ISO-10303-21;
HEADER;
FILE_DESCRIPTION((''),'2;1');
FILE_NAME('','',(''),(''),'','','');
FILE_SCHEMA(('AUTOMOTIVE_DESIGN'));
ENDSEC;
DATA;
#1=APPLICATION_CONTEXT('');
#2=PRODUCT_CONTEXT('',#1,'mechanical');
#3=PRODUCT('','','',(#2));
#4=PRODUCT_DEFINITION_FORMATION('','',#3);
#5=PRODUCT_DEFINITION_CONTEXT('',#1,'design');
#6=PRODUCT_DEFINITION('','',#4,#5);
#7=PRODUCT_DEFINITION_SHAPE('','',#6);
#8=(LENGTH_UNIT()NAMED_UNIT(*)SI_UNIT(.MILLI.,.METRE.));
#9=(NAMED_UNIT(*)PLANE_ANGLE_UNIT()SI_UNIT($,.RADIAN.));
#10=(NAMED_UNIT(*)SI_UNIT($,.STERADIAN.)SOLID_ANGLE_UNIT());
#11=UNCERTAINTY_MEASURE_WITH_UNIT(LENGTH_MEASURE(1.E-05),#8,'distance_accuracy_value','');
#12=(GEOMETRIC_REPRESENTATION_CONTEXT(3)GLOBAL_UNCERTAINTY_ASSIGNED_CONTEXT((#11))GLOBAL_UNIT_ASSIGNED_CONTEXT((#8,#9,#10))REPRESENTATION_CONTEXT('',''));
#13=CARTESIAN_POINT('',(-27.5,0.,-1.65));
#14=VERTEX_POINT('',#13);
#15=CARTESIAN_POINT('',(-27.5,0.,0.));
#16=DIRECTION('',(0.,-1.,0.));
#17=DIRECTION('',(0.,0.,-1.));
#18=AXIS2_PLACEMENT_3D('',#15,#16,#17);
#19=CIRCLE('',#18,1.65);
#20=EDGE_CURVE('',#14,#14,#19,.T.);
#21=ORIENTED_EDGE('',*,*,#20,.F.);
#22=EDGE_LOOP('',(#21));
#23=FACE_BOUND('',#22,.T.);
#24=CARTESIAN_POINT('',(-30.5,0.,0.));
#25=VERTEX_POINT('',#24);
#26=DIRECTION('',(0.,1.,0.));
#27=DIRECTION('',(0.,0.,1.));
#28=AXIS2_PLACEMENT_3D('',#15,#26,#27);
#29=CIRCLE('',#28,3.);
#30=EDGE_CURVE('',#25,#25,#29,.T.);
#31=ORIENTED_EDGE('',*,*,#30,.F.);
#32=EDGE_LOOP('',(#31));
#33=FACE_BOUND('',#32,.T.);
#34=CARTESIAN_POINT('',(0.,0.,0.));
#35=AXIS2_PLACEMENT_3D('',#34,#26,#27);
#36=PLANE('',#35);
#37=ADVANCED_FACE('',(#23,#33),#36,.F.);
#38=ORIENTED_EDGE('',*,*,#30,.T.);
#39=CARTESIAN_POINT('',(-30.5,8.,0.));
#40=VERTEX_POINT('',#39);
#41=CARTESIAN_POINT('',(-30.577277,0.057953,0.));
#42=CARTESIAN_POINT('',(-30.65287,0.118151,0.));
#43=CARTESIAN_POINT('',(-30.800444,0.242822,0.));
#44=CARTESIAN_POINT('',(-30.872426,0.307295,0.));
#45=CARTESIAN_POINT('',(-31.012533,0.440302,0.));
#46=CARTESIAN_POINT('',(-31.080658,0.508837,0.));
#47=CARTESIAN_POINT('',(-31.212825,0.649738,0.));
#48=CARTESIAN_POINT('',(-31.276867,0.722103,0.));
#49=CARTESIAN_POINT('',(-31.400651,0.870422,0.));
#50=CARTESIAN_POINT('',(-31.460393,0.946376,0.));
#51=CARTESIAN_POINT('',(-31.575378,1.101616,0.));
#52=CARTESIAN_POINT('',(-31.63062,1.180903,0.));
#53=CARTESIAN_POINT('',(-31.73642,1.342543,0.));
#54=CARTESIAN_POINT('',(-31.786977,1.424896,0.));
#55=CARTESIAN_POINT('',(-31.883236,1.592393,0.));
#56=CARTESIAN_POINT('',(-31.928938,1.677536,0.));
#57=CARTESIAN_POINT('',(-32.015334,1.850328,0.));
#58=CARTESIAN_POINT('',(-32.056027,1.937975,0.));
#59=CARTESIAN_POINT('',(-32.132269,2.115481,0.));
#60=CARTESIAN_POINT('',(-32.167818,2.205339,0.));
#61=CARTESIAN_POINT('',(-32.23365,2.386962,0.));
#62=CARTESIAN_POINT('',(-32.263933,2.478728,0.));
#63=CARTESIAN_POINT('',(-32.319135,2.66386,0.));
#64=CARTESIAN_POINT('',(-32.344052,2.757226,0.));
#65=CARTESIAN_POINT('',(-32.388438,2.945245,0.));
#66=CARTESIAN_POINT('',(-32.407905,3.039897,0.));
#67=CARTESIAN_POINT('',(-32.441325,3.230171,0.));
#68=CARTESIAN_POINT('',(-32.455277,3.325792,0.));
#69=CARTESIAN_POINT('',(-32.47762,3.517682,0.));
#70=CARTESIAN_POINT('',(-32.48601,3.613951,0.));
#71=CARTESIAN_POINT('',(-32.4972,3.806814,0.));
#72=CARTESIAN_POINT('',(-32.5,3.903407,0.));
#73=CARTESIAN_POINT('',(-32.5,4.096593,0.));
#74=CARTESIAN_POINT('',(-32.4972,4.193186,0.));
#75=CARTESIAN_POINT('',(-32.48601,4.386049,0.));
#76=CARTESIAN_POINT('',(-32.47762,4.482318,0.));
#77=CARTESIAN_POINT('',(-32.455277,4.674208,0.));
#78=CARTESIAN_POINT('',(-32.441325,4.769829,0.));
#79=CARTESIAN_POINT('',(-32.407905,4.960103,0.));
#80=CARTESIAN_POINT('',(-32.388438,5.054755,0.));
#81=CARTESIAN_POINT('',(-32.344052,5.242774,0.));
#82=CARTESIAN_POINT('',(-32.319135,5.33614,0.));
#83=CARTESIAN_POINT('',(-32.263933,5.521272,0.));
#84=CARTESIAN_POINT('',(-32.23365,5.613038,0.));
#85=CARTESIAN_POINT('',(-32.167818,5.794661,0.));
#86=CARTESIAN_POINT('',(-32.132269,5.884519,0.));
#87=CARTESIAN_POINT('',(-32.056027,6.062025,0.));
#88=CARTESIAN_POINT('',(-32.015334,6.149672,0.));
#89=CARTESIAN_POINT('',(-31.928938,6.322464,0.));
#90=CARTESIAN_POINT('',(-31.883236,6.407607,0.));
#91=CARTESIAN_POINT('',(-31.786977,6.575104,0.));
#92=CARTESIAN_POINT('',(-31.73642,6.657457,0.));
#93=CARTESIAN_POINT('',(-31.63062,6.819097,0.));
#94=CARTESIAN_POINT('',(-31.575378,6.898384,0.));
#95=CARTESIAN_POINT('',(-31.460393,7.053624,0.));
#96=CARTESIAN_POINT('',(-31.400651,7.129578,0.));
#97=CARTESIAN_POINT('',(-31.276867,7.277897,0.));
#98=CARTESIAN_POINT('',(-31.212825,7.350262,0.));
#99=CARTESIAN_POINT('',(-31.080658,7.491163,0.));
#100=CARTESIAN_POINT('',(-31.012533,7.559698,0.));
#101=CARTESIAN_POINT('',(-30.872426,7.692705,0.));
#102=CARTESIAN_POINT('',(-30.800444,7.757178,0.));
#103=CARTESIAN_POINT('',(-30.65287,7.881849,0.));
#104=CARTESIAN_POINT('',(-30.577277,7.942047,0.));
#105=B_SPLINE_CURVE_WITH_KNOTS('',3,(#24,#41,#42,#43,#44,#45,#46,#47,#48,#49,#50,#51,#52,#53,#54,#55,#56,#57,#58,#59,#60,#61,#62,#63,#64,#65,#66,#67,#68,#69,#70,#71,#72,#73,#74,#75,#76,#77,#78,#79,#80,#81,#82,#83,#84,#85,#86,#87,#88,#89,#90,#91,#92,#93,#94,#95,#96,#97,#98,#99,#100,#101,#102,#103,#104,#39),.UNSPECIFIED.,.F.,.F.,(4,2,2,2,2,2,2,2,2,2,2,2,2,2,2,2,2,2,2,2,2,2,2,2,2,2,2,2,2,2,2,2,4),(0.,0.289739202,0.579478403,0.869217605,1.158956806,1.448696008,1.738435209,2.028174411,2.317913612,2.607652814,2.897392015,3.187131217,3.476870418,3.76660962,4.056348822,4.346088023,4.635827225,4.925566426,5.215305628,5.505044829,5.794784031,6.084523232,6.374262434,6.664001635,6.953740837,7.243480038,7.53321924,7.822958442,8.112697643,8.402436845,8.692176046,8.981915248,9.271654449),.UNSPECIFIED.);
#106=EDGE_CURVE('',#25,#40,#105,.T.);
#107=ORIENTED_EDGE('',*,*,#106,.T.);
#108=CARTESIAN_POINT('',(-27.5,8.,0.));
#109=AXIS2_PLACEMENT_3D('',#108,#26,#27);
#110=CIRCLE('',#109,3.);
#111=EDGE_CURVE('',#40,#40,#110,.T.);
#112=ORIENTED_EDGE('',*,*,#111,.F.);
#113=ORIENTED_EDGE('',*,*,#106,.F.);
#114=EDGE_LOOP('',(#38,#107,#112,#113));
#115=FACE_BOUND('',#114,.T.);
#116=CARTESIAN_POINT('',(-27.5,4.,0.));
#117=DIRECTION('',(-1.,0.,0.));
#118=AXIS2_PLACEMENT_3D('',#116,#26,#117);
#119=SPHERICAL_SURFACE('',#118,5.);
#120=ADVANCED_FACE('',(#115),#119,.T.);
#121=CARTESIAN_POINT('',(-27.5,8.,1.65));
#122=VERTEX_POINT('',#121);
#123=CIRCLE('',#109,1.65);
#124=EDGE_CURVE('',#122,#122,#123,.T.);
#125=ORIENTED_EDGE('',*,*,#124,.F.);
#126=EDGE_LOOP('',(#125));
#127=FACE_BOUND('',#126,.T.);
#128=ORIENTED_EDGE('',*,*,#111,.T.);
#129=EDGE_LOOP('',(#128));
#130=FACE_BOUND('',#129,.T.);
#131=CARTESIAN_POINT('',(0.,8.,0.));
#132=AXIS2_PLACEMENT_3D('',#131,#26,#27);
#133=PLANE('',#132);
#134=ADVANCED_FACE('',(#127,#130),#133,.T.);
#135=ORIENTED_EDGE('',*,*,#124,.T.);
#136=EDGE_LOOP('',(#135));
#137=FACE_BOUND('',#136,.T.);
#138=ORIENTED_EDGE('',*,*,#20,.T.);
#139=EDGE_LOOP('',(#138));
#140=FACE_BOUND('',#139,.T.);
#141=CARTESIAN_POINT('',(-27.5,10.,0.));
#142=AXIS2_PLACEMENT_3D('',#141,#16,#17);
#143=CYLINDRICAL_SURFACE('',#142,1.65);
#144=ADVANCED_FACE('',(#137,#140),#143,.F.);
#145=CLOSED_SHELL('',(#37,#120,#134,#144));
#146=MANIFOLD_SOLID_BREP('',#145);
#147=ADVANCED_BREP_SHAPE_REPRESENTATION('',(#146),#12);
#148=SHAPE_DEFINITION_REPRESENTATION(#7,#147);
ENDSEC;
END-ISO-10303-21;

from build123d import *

# Parameters (mm, degrees)
SKETCH1_W           = 70
SKETCH1_H           = 28
BOSS_EXTRUDE1_DEPTH = 8
SKETCH2_W           = 10
SKETCH2_H           = 10
CUT_EXTRUDE1_DEPTH  = 10
SKETCH3_R           = 2.15
CUT_EXTRUDE2_DEPTH  = 46.530209751
SKETCH5_W           = 16.977623655
SKETCH5_H           = 6.5
CUT_EXTRUDE4_DEPTH  = 39.535697736
SKETCH7_R           = 1.65
CUT_EXTRUDE5_DEPTH  = 10


# Read off the part's stored shape, not the designer's step: Cut-Revolve1
with BuildPart() as part:
    # Sketch1 → Boss-Extrude1 (new body)
    with BuildSketch(Plane(origin=(0, 0, 0), x_dir=(1, 0, 0), z_dir=(0, 1, 0))):
        Rectangle(SKETCH1_W, SKETCH1_H)
    extrude(amount=BOSS_EXTRUDE1_DEPTH)

    # Sketch2 → Cut-Extrude1 (cut)
    with BuildSketch(Plane(origin=(0, 8, 0), x_dir=(1, 0, 0), z_dir=(0, 1, 0))):
        with Locations((30, 0)):
            Rectangle(SKETCH2_W, SKETCH2_H)
    extrude(amount=-CUT_EXTRUDE1_DEPTH, mode=Mode.SUBTRACT)

    # Sketch3 → Cut-Extrude2 (cut, through all)
    with BuildSketch(Plane.XY.offset(14)):
        with Locations((31, 4)):
            Circle(SKETCH3_R)
    extrude(amount=-CUT_EXTRUDE2_DEPTH, mode=Mode.SUBTRACT)

    # Sketch5 → Cut-Extrude4 (cut, through all)
    with BuildSketch(Plane(origin=(0, 8, 0), x_dir=(1, 0, 0), z_dir=(0, 1, 0))):
        with Locations((-26.511188172, 10.75)):
            Rectangle(SKETCH5_W, SKETCH5_H)
        Polygon((-18.022376345, 14), (-18.022376345, 7.5), (1.977623655, 14), align=None)
        Polygon((1.977623655, -14), (-18.022376345, -7.5), (-18.022376345, -14), align=None)
        with Locations((-26.511188172, -10.75)):
            Rectangle(SKETCH5_W, SKETCH5_H)
    extrude(amount=-CUT_EXTRUDE4_DEPTH, mode=Mode.SUBTRACT)

    # Cut-Revolve1 outline → Cut-Revolve1 (revolve, cut)
    with BuildSketch(Plane(origin=(0, 4, 0), x_dir=(0, 1, 0), z_dir=(0, 0, -1))):
        with BuildLine():
            Line((0, -35), (8.5, -35))
            Line((8.5, -35), (8.5, -22.5))
            Line((8.5, -22.5), (14.560219779, -22.5))
            Line((14.560219779, -22.5), (14.560219779, 35))
            Line((14.560219779, 35), (0, 35))
            Line((0, 35), (0, -22.5))
            ThreePointArc((0, -22.5), (5, -27.5), (0, -32.5))
            Line((0, -32.5), (0, -35))
        make_face()
    revolve(axis=Axis((0, 4, 0), (1, 0, 0)), mode=Mode.SUBTRACT)

    # Sketch7 → Cut-Extrude5 (cut)
    with BuildSketch(Plane.XZ):
        with Locations(Location((-27.5, 0, 0), (0, 0, 270))):
            Circle(SKETCH7_R)
    extrude(amount=-CUT_EXTRUDE5_DEPTH, mode=Mode.SUBTRACT)


solid = part.part
